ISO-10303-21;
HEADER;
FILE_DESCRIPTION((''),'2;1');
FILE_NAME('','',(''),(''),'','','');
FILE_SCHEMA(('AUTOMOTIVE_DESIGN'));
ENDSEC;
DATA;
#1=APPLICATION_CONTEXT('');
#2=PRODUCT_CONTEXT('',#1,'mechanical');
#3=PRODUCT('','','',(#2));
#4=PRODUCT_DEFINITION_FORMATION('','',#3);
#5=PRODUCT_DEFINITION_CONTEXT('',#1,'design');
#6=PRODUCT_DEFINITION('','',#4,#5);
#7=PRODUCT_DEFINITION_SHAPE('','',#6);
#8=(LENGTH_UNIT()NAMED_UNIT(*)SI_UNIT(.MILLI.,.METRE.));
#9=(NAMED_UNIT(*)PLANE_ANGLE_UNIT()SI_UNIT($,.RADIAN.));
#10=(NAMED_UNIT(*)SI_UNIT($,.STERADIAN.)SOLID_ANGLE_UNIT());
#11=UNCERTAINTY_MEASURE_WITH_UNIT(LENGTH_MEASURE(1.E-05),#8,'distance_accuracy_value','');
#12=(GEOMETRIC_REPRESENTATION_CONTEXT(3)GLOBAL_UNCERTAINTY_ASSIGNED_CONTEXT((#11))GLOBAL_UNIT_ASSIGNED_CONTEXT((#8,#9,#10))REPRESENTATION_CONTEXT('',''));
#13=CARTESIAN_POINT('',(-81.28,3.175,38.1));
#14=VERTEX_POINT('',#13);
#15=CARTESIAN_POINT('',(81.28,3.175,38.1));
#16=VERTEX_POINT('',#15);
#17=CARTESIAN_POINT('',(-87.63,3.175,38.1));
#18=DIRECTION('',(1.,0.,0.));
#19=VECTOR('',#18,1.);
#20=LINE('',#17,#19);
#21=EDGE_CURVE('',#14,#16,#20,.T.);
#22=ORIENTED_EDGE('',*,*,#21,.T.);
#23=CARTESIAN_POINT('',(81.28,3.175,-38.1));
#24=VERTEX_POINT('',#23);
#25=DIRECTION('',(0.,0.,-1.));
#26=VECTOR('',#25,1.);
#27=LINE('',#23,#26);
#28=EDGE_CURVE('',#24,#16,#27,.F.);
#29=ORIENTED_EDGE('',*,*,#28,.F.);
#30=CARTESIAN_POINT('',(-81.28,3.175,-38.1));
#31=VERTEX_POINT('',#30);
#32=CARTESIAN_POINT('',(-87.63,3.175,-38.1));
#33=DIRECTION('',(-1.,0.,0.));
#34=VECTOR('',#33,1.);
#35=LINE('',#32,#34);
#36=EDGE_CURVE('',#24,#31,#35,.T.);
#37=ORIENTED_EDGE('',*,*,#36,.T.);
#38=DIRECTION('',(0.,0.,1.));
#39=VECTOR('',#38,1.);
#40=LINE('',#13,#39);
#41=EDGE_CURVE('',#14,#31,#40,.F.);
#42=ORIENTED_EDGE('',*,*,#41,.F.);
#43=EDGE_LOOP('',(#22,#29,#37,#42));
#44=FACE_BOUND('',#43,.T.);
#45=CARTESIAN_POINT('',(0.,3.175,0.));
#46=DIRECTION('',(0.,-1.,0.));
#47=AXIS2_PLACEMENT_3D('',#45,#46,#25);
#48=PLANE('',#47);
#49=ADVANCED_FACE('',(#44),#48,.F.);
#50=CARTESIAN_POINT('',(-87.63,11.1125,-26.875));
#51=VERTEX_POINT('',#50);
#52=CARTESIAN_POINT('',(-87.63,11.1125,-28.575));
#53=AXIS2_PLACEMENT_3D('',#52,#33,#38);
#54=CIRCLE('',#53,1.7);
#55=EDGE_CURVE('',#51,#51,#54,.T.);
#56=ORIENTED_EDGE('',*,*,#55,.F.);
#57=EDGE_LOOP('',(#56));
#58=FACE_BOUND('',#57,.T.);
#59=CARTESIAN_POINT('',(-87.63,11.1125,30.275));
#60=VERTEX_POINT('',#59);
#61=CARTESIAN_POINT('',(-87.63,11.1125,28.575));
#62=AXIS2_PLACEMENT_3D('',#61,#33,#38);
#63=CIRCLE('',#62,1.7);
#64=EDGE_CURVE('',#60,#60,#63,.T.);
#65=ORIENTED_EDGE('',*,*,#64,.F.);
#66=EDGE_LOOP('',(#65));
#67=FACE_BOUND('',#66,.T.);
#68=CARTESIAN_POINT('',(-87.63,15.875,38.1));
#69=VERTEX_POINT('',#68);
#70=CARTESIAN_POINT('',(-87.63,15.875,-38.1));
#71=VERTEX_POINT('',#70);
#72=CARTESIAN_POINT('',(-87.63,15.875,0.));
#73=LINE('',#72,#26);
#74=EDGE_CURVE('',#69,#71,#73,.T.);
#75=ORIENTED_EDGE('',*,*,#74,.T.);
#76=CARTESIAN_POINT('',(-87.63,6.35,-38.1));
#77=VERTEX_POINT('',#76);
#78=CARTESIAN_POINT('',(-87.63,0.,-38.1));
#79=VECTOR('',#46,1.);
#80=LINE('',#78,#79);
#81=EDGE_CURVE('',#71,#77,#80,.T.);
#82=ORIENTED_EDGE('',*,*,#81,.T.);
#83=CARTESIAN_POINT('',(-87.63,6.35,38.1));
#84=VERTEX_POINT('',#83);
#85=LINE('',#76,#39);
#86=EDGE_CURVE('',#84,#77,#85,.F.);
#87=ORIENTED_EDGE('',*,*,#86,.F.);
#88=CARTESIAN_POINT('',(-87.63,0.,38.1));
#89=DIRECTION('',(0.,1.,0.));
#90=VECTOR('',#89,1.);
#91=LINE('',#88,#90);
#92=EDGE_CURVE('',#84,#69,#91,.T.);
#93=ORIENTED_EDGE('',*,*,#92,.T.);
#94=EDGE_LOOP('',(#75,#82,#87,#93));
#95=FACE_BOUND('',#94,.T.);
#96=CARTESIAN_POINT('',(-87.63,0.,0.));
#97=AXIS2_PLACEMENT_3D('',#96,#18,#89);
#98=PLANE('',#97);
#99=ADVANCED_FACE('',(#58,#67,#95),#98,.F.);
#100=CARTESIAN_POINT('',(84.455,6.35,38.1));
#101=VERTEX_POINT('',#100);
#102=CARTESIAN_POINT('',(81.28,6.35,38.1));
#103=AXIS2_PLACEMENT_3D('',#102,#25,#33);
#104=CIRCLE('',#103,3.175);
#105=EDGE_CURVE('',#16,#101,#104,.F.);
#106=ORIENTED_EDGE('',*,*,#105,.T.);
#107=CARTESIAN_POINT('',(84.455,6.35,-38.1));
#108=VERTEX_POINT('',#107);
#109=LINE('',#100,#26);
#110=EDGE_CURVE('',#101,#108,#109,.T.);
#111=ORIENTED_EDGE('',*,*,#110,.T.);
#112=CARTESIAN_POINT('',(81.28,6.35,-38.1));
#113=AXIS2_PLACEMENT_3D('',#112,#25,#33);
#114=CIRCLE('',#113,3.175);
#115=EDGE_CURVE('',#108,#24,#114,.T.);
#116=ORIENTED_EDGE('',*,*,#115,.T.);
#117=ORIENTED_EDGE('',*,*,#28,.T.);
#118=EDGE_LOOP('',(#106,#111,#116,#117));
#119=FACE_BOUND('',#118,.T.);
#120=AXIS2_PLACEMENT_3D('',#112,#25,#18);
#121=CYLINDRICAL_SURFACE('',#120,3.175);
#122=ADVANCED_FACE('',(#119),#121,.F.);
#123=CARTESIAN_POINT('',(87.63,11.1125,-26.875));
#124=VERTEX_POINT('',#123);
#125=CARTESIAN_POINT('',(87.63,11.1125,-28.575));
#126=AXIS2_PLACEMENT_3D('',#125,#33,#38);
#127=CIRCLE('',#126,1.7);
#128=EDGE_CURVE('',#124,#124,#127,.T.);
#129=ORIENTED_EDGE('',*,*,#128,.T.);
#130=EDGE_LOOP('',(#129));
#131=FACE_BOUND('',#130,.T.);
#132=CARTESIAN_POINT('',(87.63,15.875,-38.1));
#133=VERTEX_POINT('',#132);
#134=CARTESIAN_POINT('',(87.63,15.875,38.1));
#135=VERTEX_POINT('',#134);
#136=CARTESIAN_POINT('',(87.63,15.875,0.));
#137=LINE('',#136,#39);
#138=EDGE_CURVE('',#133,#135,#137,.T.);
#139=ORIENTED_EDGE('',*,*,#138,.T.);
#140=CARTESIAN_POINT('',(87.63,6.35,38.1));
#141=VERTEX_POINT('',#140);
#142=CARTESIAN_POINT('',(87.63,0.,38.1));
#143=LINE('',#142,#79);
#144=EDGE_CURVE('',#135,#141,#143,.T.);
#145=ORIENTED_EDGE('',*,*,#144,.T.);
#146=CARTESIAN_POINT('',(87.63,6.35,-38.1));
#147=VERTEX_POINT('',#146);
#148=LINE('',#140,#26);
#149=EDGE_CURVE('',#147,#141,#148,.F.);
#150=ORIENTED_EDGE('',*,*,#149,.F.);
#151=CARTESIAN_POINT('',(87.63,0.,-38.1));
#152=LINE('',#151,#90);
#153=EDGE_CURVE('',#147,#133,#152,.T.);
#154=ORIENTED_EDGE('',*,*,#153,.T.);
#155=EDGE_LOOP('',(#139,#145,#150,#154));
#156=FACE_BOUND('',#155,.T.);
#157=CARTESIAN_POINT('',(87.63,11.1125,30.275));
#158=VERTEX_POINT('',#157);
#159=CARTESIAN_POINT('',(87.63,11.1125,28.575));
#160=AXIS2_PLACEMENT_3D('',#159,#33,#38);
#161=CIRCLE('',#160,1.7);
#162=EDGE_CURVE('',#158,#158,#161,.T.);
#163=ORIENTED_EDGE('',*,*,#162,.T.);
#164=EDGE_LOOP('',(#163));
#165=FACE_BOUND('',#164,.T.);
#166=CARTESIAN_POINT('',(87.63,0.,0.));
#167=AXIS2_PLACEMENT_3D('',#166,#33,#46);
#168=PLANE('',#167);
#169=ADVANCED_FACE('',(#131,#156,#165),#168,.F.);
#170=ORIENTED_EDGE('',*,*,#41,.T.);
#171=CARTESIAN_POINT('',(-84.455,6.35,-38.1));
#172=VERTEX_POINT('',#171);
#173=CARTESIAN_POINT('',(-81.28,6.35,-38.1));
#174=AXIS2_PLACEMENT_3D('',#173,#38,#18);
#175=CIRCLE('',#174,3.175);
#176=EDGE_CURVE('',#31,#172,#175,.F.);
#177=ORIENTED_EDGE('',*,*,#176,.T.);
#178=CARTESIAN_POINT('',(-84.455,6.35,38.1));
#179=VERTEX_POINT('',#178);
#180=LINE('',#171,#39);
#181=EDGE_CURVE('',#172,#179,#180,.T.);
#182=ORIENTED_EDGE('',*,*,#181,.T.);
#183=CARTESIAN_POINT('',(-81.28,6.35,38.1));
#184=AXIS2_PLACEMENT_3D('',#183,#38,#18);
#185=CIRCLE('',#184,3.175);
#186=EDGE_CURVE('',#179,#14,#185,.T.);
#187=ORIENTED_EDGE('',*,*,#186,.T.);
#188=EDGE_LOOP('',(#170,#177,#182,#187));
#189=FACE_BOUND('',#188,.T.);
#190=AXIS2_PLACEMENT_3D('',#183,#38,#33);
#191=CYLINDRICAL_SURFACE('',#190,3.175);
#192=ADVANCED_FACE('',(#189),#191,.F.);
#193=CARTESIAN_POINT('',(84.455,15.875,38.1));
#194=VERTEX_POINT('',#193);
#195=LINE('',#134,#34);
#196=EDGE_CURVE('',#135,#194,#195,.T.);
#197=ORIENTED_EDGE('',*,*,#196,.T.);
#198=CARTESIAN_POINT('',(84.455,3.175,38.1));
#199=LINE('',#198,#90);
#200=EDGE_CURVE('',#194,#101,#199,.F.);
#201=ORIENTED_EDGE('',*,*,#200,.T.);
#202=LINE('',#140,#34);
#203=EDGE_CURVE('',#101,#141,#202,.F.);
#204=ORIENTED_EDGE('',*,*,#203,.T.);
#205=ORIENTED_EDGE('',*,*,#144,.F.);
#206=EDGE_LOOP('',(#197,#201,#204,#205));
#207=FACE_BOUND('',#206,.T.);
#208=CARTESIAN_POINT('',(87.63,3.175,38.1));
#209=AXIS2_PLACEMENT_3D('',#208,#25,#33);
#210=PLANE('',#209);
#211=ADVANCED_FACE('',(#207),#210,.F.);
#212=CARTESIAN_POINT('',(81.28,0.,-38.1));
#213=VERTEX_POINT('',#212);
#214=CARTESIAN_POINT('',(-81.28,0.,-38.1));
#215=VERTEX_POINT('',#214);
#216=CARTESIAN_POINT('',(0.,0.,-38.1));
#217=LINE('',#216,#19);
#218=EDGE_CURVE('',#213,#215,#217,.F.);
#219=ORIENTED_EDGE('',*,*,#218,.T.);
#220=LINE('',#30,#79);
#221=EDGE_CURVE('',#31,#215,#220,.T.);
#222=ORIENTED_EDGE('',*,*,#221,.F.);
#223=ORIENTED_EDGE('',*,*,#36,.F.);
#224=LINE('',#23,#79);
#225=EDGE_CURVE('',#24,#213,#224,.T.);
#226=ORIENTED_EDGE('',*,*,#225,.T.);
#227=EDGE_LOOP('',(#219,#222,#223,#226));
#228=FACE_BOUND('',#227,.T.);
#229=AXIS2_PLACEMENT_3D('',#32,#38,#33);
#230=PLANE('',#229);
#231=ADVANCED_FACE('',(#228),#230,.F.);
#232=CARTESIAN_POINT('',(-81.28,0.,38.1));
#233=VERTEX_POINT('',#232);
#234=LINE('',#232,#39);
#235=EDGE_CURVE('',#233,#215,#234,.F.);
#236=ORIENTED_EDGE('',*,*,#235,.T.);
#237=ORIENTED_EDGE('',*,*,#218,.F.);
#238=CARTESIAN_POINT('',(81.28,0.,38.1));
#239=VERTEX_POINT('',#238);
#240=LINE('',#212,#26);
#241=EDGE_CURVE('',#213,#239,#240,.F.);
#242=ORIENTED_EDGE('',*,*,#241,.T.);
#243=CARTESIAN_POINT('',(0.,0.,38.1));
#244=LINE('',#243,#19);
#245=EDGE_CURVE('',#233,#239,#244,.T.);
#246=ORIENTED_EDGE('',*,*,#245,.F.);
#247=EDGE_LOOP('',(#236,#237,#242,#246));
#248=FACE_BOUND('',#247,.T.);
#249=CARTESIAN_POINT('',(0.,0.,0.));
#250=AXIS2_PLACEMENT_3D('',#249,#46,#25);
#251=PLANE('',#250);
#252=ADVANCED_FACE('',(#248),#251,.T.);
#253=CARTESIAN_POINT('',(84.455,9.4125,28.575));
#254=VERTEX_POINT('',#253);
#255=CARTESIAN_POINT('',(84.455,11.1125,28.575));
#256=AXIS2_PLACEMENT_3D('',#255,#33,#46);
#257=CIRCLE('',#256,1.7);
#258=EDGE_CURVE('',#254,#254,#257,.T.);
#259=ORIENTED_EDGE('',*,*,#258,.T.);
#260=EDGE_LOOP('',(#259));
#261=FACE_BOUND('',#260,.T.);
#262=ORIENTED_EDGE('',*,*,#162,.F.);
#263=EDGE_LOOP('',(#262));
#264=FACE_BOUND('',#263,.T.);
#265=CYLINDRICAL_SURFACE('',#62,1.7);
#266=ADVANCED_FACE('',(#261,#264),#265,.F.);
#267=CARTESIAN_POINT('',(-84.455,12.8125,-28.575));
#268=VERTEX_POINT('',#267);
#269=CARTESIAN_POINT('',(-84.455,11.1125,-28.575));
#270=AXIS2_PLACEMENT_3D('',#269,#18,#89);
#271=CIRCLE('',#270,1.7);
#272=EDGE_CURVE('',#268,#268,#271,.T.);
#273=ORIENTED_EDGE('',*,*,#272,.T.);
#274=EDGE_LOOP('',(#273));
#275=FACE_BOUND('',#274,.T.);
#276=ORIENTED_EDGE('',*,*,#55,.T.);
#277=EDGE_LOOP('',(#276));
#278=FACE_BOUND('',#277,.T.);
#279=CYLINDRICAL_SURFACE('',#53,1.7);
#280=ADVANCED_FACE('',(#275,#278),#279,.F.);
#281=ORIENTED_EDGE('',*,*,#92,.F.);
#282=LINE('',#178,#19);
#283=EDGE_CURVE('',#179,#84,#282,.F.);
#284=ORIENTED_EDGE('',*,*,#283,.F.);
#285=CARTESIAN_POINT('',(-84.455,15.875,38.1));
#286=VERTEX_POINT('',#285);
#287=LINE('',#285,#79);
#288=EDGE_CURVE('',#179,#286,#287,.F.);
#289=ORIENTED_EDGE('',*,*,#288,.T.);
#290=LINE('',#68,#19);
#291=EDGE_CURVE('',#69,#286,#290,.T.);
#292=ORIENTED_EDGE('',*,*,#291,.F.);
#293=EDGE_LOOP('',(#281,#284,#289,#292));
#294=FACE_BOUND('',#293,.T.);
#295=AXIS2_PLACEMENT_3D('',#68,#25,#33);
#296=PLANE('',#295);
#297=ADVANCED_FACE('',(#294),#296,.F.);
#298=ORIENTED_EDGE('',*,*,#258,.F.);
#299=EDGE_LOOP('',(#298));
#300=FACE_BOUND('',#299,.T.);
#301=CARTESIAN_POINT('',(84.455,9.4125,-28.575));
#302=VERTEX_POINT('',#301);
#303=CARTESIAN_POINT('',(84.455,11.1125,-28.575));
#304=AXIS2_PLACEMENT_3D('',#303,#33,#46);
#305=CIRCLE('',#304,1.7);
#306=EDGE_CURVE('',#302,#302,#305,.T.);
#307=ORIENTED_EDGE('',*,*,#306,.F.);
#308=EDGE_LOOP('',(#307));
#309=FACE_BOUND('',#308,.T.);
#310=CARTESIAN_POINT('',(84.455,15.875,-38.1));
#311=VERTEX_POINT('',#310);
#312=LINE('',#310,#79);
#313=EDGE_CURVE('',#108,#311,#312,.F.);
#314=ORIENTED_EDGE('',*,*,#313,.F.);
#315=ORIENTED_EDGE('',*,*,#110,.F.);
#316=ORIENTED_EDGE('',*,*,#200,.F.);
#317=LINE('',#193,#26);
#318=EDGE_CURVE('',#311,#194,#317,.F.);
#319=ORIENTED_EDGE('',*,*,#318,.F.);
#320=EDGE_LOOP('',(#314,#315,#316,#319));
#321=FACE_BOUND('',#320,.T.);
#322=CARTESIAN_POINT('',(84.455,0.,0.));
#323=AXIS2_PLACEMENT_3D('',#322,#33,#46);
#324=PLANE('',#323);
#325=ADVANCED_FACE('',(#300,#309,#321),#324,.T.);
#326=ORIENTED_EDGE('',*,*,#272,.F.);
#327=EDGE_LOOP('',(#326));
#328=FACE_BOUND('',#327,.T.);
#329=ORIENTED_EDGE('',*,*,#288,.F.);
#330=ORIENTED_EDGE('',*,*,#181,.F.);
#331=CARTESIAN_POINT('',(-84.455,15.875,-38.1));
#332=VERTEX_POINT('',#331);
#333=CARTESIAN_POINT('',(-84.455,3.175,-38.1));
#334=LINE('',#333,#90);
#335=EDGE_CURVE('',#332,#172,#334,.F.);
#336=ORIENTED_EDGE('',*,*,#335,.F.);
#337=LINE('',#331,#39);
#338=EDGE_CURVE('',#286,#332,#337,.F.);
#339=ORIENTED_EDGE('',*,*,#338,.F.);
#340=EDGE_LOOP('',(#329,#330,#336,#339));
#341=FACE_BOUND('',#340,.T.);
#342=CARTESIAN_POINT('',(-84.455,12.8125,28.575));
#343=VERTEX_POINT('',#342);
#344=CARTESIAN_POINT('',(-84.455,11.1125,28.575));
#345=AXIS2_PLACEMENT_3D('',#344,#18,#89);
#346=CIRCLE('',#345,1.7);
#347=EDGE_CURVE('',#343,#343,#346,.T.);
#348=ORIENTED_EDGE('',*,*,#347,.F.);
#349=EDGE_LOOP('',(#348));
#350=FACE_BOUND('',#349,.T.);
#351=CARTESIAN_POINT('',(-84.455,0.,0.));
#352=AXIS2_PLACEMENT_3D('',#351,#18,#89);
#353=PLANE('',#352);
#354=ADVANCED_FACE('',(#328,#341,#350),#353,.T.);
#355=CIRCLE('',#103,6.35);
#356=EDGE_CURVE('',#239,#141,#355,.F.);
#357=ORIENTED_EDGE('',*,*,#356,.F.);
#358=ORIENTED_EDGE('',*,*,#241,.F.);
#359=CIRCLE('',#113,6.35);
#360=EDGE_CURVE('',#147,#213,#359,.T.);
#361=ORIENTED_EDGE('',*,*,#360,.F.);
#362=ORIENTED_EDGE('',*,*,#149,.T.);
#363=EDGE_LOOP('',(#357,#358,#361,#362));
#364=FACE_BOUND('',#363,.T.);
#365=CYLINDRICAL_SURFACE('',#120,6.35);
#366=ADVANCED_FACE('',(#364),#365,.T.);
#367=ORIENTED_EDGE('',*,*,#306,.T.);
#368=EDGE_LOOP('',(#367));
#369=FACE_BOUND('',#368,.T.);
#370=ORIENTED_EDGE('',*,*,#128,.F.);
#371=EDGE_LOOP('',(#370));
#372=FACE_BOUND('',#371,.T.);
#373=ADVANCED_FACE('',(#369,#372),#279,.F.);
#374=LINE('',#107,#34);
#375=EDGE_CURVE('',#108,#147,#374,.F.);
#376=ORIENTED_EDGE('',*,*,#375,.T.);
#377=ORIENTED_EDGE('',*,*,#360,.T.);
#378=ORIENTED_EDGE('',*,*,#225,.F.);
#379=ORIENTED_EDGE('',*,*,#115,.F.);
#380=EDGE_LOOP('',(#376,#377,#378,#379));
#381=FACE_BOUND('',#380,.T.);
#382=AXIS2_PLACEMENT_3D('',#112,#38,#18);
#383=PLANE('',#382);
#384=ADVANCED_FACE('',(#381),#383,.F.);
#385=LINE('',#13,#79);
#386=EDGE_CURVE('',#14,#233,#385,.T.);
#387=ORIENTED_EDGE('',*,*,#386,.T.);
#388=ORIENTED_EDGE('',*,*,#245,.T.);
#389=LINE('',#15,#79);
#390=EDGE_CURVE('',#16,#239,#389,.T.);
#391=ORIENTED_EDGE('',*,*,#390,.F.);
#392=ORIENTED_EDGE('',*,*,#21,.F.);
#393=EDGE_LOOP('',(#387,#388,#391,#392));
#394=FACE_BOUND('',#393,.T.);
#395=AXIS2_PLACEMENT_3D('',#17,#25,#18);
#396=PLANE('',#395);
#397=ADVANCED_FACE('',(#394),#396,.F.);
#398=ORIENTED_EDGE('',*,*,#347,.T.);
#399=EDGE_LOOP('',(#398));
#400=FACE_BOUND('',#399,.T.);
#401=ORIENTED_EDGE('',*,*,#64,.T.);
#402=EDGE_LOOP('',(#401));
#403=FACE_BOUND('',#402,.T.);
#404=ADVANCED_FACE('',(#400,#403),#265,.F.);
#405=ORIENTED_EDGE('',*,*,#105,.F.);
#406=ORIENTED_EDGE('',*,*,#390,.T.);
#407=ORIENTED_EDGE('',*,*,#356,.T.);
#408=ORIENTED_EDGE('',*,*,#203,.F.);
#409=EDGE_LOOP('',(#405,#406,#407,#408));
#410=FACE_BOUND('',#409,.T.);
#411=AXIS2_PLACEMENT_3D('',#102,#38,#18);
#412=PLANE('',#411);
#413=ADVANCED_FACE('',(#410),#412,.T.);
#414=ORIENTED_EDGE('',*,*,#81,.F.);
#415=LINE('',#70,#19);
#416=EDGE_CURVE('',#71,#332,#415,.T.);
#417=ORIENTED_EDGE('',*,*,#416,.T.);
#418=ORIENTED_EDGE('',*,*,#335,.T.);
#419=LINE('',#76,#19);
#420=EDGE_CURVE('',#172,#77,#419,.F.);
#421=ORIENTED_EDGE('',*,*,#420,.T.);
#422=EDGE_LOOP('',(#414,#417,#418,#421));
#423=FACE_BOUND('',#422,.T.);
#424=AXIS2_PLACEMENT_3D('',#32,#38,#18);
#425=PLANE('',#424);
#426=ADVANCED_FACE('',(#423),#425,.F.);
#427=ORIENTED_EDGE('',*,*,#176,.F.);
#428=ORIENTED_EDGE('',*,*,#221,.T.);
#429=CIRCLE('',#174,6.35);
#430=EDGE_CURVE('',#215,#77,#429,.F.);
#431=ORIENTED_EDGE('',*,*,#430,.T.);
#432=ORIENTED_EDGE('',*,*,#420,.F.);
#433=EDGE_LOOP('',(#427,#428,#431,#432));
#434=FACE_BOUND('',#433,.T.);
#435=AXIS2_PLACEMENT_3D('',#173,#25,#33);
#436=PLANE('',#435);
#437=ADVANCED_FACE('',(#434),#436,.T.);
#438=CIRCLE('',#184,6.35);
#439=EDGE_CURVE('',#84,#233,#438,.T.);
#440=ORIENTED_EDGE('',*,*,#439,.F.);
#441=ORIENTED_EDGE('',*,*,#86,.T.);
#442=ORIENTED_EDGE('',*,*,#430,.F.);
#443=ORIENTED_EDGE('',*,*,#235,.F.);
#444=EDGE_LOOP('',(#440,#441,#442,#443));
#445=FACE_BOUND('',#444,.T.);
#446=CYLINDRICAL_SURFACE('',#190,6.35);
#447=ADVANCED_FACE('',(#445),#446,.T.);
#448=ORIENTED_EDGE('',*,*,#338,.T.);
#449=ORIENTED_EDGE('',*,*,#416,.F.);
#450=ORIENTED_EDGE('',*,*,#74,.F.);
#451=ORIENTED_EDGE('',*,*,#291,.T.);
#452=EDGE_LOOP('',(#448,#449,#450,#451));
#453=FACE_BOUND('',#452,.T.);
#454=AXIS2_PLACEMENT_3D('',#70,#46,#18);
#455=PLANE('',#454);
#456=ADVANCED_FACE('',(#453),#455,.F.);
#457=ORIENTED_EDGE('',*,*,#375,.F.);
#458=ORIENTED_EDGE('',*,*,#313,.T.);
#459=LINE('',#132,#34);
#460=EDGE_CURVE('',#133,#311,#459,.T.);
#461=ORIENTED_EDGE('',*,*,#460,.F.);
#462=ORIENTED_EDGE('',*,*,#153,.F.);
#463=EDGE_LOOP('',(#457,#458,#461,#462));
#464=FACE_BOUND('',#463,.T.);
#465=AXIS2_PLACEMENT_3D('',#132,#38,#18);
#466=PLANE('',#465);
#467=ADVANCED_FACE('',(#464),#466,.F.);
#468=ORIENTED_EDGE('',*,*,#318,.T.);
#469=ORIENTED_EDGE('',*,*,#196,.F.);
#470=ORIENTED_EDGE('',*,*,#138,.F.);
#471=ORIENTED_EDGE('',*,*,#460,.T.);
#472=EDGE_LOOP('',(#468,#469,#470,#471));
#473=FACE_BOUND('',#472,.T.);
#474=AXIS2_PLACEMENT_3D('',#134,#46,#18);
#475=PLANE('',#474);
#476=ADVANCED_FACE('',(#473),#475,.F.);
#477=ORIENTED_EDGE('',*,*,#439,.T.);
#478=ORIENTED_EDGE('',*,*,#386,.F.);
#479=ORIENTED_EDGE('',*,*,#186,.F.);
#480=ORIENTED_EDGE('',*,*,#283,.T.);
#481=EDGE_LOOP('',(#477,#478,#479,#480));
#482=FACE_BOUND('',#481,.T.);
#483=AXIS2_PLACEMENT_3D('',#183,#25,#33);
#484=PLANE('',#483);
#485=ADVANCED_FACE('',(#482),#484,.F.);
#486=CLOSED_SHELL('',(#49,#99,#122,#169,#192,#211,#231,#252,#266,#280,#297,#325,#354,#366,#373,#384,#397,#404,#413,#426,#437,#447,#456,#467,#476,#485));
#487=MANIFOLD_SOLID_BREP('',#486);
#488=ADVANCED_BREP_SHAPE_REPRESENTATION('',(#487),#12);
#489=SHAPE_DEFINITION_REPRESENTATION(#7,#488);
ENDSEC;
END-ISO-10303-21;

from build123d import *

# Parameters (mm, degrees)
SKETCH1_W                      = 175.26
SKETCH1_H                      = 76.2
BOSS_EXTRUDE1_DEPTH            = 3.175
EDGE_FLANGE1_STRIP_W           = 19.05
EDGE_FLANGE1_STRIP_H           = 3.175
EDGE_FLANGE1_STRIP_CUT_DEPTH   = 76.2
EDGE_FLANGE1_STRIP_2_W         = 19.05
EDGE_FLANGE1_STRIP_2_H         = 3.175
EDGE_FLANGE1_STRIP_CUT_2_DEPTH = 76.2
EDGE_FLANGE1_DEPTH             = 76.2
EDGE_FLANGE1_BEND_DEPTH        = 76.2
M3_CLEARANCE_HOLE1_D           = 3.4


# Sheet-metal steps are written as plain solids
with BuildPart() as part:
    # Sketch1 → Boss-Extrude1 (new body)
    with BuildSketch(Plane(origin=(0, 0, 0), x_dir=(1, 0, 0), z_dir=(0, 1, 0))):
        Rectangle(SKETCH1_W, SKETCH1_H)
    extrude(amount=BOSS_EXTRUDE1_DEPTH)

    # Edge-Flange1 strip (across the edge) → Edge-Flange1 strip cut (cut)
    with BuildSketch(Plane(origin=(87.63, 3.175, 38.1), x_dir=(-1, 0, 0), z_dir=(0, 0, -1))):
        with Locations((-3.175, -1.5875)):
            Rectangle(EDGE_FLANGE1_STRIP_W, EDGE_FLANGE1_STRIP_H)
    extrude(amount=EDGE_FLANGE1_STRIP_CUT_DEPTH, mode=Mode.SUBTRACT)

    # Edge-Flange1 strip 2 (across the edge) → Edge-Flange1 strip cut 2 (cut)
    with BuildSketch(Plane(origin=(-87.63, 3.175, -38.1), x_dir=(1, 0, 0), z_dir=(0, 0, 1))):
        with Locations((-3.175, -1.5875)):
            Rectangle(EDGE_FLANGE1_STRIP_2_W, EDGE_FLANGE1_STRIP_2_H)
    extrude(amount=EDGE_FLANGE1_STRIP_CUT_2_DEPTH, mode=Mode.SUBTRACT)

    # Edge-Flange1 section (across the edge) → Edge-Flange1 (add)
    with BuildSketch(Plane(origin=(87.63, 3.175, 38.1), x_dir=(-1, 0, 0), z_dir=(0, 0, -1))):
        with BuildLine():
            Line((0, 3.175), (0, 12.7))
            Line((0, 12.7), (3.175, 12.7))
            Line((3.175, 12.7), (3.175, 3.175))
            ThreePointArc((3.175, 3.175), (4.10493597, 0.92993597), (6.35, 0))
            Line((6.35, 0), (6.35, -3.175))
            ThreePointArc((6.35, -3.175), (1.859871939, -1.315128061), (0, 3.175))
        make_face()
    extrude(amount=EDGE_FLANGE1_DEPTH)

    # Edge-Flange1 section 2 (across the edge) → Edge-Flange1 bend (add)
    with BuildSketch(Plane(origin=(-87.63, 3.175, -38.1), x_dir=(1, 0, 0), z_dir=(0, 0, 1))):
        with BuildLine():
            Line((0, 3.175), (0, 12.7))
            Line((0, 12.7), (3.175, 12.7))
            Line((3.175, 12.7), (3.175, 3.175))
            ThreePointArc((3.175, 3.175), (4.10493597, 0.92993597), (6.35, 0))
            Line((6.35, 0), (6.35, -3.175))
            ThreePointArc((6.35, -3.175), (1.859871939, -1.315128061), (0, 3.175))
        make_face()
    extrude(amount=EDGE_FLANGE1_BEND_DEPTH)

    # M3 Clearance Hole1 (through all)
    with Locations(Plane(origin=(-87.63, 11.1125, -28.575), x_dir=(0, -1, 0), z_dir=(-1, 0, 0))):
        with Locations((0, 0), (0, 57.15)):
            Hole(M3_CLEARANCE_HOLE1_D / 2)


solid = part.part
